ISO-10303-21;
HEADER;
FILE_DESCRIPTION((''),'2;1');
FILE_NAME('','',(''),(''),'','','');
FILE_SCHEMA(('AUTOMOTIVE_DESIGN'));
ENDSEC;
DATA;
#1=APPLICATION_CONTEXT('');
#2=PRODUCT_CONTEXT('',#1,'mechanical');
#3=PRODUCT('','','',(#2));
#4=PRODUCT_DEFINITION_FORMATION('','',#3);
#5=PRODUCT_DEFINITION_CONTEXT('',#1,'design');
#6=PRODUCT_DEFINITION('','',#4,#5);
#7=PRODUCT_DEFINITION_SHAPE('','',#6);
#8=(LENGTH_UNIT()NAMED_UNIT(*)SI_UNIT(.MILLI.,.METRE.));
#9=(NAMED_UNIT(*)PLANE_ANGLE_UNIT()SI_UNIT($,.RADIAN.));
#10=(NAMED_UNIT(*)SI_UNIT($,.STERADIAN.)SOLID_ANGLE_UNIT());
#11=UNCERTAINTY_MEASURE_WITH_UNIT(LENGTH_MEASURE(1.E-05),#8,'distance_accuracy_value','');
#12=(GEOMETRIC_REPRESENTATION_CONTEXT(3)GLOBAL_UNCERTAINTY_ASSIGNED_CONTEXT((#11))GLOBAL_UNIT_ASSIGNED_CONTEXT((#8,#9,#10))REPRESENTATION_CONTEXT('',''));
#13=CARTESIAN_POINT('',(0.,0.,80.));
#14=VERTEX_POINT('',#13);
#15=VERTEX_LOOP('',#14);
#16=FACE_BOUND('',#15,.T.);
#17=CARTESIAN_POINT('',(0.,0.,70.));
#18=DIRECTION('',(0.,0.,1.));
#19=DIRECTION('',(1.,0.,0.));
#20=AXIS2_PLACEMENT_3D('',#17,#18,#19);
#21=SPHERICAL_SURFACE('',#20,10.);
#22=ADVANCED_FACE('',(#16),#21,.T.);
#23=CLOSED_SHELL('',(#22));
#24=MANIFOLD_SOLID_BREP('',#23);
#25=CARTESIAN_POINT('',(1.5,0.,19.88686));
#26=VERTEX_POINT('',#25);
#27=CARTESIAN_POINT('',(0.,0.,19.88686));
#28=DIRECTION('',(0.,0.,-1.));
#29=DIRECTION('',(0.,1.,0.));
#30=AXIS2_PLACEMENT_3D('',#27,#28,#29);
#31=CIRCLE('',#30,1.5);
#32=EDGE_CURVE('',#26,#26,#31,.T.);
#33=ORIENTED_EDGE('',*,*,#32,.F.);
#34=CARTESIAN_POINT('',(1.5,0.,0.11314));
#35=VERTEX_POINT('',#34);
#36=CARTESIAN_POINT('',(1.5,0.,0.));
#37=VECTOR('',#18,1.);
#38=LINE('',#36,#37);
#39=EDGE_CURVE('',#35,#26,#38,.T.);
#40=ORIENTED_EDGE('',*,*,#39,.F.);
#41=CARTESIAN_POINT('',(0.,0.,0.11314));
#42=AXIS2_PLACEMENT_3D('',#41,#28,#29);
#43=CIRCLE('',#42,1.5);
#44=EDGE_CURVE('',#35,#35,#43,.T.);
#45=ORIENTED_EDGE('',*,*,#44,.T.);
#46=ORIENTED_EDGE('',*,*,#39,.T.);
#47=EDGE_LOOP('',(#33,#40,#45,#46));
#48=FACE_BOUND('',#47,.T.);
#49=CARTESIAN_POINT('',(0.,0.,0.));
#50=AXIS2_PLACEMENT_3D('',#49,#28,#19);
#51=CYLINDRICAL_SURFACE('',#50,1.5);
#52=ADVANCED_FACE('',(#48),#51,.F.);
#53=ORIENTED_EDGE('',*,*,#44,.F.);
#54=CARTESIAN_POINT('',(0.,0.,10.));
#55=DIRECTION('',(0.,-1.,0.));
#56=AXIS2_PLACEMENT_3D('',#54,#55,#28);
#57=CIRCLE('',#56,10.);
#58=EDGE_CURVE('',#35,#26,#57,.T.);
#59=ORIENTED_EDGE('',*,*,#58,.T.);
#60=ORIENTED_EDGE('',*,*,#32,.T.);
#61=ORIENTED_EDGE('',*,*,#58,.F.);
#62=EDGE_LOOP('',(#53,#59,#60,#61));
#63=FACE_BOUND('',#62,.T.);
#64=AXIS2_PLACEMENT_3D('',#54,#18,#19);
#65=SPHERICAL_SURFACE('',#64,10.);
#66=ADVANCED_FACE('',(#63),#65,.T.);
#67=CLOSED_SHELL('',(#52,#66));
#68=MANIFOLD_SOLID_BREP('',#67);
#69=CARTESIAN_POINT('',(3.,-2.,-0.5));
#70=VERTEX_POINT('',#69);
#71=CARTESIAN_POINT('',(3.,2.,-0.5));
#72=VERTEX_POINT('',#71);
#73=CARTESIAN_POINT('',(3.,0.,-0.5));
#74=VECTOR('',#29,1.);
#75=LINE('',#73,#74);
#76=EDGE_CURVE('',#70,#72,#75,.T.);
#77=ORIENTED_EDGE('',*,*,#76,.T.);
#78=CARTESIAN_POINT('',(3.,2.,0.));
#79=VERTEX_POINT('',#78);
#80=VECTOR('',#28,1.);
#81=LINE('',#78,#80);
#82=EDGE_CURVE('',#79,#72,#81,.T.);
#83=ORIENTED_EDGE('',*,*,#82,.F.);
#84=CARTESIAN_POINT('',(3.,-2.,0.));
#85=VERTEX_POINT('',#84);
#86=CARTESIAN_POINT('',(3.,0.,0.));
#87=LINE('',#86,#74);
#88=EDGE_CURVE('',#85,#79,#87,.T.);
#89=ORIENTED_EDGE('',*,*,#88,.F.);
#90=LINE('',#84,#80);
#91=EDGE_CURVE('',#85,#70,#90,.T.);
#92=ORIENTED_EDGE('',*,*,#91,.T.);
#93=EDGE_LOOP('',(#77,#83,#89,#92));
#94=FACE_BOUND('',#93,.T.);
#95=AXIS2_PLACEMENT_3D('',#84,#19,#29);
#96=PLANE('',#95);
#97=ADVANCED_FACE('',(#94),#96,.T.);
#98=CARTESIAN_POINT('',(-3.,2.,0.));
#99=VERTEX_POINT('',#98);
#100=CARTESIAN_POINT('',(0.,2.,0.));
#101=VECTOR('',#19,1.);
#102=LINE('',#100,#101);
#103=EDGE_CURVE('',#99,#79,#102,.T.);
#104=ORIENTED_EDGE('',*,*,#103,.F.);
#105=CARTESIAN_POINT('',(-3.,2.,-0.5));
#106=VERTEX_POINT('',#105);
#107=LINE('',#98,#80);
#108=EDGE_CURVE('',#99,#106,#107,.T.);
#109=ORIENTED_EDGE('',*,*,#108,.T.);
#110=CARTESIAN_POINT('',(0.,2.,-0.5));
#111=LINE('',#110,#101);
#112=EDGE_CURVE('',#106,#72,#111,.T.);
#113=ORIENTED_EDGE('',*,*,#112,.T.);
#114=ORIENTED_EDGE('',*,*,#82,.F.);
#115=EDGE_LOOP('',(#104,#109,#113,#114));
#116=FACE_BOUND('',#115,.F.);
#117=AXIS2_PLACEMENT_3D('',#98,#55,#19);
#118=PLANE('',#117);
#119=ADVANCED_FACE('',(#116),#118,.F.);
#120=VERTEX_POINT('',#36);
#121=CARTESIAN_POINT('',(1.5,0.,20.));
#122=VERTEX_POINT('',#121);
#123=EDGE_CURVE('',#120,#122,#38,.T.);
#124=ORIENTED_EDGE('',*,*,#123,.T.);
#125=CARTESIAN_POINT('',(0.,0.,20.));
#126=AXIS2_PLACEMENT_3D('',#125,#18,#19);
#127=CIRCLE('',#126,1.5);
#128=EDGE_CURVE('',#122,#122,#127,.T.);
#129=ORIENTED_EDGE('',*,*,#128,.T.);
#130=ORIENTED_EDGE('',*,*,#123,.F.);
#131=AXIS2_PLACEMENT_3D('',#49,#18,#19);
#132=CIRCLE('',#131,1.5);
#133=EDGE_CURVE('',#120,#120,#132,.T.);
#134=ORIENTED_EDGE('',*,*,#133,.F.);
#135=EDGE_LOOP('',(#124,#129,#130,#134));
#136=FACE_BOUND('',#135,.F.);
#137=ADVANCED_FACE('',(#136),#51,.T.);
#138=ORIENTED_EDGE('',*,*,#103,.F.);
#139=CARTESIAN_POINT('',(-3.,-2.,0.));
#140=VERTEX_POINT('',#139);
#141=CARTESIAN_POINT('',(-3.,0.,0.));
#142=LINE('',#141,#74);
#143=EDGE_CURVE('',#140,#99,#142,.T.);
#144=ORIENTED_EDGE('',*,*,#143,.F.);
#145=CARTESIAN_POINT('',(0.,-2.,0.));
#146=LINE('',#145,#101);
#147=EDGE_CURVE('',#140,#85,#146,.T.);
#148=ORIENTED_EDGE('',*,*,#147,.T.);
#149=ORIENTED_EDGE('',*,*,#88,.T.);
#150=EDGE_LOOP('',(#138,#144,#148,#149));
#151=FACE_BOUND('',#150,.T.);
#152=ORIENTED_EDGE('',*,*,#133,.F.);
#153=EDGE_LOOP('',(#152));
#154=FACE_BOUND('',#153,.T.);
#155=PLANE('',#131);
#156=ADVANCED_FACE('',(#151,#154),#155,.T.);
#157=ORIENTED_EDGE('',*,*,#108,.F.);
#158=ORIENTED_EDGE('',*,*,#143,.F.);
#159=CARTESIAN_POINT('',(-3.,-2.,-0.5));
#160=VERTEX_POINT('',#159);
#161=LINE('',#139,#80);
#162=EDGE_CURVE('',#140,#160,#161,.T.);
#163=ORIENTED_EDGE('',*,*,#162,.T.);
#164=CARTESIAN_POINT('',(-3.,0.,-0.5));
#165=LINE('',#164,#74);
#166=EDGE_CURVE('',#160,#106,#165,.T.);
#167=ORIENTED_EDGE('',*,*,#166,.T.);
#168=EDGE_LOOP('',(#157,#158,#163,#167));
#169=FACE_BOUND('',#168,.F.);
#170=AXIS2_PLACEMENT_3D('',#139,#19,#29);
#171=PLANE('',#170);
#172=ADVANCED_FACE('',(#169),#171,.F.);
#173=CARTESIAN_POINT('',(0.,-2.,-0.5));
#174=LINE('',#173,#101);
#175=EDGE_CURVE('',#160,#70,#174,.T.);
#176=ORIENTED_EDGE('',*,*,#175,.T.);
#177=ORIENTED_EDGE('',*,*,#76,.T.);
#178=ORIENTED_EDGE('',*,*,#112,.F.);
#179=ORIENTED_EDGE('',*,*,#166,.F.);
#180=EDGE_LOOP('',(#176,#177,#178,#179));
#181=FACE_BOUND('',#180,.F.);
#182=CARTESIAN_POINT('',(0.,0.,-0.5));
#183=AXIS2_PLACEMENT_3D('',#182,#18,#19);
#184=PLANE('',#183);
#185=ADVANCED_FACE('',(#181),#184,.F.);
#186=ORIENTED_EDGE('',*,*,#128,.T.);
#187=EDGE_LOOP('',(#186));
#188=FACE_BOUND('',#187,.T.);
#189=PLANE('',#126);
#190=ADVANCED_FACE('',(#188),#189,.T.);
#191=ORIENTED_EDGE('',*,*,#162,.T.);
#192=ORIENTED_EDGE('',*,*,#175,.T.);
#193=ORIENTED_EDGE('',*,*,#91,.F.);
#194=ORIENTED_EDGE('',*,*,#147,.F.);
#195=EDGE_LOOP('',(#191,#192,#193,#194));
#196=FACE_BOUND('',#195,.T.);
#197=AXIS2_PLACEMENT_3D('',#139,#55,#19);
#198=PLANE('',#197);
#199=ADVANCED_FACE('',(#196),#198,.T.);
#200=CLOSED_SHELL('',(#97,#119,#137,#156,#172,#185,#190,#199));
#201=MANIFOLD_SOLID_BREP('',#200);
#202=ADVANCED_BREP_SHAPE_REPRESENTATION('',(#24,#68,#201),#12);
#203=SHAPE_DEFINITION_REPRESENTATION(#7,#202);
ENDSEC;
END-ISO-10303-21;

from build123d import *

# Parameters (mm, degrees)
F2_R     = 1.5
F3_DEPTH = 20
F5_W     = 6
F5_H     = 4
F6_DEPTH = 0.5


with BuildPart() as f1:
    # F0 (on Front) → F1 (revolve)
    with BuildSketch(Plane.XZ):
        with BuildLine():
            Line((0, 20), (0, 0))
            ThreePointArc((0, 0), (10, 10), (0, 20))
        make_face()
    revolve(axis=Axis((0, 0, 10), (0, 0, 1)))


with BuildPart() as f1b:
    # F0 (on Front) → F1, piece 2 (revolve)
    with BuildSketch(Plane.XZ):
        with BuildLine():
            Line((0, 80), (0, 60))
            ThreePointArc((0, 60), (10, 70), (0, 80))
        make_face()
    revolve(axis=Axis((0, 0, 10), (0, 0, 1)))


with BuildPart() as f3:
    # F2 (on Top) → F3 (new body)
    with BuildSketch(Plane.XY):
        Circle(F2_R)
    extrude(amount=F3_DEPTH)


with BuildPart() as f1_1:
    add(f1.part)

    # F4: cut F3
    add(f3.part, mode=Mode.SUBTRACT)


with BuildPart() as f3_1:
    add(f3.part)

    # F5 (on Top) → F6 (join)
    with BuildSketch(Plane.XY):
        Rectangle(F5_W, F5_H)
    extrude(amount=-F6_DEPTH)


solid = Compound([f1b.part, f1_1.part, f3_1.part])
